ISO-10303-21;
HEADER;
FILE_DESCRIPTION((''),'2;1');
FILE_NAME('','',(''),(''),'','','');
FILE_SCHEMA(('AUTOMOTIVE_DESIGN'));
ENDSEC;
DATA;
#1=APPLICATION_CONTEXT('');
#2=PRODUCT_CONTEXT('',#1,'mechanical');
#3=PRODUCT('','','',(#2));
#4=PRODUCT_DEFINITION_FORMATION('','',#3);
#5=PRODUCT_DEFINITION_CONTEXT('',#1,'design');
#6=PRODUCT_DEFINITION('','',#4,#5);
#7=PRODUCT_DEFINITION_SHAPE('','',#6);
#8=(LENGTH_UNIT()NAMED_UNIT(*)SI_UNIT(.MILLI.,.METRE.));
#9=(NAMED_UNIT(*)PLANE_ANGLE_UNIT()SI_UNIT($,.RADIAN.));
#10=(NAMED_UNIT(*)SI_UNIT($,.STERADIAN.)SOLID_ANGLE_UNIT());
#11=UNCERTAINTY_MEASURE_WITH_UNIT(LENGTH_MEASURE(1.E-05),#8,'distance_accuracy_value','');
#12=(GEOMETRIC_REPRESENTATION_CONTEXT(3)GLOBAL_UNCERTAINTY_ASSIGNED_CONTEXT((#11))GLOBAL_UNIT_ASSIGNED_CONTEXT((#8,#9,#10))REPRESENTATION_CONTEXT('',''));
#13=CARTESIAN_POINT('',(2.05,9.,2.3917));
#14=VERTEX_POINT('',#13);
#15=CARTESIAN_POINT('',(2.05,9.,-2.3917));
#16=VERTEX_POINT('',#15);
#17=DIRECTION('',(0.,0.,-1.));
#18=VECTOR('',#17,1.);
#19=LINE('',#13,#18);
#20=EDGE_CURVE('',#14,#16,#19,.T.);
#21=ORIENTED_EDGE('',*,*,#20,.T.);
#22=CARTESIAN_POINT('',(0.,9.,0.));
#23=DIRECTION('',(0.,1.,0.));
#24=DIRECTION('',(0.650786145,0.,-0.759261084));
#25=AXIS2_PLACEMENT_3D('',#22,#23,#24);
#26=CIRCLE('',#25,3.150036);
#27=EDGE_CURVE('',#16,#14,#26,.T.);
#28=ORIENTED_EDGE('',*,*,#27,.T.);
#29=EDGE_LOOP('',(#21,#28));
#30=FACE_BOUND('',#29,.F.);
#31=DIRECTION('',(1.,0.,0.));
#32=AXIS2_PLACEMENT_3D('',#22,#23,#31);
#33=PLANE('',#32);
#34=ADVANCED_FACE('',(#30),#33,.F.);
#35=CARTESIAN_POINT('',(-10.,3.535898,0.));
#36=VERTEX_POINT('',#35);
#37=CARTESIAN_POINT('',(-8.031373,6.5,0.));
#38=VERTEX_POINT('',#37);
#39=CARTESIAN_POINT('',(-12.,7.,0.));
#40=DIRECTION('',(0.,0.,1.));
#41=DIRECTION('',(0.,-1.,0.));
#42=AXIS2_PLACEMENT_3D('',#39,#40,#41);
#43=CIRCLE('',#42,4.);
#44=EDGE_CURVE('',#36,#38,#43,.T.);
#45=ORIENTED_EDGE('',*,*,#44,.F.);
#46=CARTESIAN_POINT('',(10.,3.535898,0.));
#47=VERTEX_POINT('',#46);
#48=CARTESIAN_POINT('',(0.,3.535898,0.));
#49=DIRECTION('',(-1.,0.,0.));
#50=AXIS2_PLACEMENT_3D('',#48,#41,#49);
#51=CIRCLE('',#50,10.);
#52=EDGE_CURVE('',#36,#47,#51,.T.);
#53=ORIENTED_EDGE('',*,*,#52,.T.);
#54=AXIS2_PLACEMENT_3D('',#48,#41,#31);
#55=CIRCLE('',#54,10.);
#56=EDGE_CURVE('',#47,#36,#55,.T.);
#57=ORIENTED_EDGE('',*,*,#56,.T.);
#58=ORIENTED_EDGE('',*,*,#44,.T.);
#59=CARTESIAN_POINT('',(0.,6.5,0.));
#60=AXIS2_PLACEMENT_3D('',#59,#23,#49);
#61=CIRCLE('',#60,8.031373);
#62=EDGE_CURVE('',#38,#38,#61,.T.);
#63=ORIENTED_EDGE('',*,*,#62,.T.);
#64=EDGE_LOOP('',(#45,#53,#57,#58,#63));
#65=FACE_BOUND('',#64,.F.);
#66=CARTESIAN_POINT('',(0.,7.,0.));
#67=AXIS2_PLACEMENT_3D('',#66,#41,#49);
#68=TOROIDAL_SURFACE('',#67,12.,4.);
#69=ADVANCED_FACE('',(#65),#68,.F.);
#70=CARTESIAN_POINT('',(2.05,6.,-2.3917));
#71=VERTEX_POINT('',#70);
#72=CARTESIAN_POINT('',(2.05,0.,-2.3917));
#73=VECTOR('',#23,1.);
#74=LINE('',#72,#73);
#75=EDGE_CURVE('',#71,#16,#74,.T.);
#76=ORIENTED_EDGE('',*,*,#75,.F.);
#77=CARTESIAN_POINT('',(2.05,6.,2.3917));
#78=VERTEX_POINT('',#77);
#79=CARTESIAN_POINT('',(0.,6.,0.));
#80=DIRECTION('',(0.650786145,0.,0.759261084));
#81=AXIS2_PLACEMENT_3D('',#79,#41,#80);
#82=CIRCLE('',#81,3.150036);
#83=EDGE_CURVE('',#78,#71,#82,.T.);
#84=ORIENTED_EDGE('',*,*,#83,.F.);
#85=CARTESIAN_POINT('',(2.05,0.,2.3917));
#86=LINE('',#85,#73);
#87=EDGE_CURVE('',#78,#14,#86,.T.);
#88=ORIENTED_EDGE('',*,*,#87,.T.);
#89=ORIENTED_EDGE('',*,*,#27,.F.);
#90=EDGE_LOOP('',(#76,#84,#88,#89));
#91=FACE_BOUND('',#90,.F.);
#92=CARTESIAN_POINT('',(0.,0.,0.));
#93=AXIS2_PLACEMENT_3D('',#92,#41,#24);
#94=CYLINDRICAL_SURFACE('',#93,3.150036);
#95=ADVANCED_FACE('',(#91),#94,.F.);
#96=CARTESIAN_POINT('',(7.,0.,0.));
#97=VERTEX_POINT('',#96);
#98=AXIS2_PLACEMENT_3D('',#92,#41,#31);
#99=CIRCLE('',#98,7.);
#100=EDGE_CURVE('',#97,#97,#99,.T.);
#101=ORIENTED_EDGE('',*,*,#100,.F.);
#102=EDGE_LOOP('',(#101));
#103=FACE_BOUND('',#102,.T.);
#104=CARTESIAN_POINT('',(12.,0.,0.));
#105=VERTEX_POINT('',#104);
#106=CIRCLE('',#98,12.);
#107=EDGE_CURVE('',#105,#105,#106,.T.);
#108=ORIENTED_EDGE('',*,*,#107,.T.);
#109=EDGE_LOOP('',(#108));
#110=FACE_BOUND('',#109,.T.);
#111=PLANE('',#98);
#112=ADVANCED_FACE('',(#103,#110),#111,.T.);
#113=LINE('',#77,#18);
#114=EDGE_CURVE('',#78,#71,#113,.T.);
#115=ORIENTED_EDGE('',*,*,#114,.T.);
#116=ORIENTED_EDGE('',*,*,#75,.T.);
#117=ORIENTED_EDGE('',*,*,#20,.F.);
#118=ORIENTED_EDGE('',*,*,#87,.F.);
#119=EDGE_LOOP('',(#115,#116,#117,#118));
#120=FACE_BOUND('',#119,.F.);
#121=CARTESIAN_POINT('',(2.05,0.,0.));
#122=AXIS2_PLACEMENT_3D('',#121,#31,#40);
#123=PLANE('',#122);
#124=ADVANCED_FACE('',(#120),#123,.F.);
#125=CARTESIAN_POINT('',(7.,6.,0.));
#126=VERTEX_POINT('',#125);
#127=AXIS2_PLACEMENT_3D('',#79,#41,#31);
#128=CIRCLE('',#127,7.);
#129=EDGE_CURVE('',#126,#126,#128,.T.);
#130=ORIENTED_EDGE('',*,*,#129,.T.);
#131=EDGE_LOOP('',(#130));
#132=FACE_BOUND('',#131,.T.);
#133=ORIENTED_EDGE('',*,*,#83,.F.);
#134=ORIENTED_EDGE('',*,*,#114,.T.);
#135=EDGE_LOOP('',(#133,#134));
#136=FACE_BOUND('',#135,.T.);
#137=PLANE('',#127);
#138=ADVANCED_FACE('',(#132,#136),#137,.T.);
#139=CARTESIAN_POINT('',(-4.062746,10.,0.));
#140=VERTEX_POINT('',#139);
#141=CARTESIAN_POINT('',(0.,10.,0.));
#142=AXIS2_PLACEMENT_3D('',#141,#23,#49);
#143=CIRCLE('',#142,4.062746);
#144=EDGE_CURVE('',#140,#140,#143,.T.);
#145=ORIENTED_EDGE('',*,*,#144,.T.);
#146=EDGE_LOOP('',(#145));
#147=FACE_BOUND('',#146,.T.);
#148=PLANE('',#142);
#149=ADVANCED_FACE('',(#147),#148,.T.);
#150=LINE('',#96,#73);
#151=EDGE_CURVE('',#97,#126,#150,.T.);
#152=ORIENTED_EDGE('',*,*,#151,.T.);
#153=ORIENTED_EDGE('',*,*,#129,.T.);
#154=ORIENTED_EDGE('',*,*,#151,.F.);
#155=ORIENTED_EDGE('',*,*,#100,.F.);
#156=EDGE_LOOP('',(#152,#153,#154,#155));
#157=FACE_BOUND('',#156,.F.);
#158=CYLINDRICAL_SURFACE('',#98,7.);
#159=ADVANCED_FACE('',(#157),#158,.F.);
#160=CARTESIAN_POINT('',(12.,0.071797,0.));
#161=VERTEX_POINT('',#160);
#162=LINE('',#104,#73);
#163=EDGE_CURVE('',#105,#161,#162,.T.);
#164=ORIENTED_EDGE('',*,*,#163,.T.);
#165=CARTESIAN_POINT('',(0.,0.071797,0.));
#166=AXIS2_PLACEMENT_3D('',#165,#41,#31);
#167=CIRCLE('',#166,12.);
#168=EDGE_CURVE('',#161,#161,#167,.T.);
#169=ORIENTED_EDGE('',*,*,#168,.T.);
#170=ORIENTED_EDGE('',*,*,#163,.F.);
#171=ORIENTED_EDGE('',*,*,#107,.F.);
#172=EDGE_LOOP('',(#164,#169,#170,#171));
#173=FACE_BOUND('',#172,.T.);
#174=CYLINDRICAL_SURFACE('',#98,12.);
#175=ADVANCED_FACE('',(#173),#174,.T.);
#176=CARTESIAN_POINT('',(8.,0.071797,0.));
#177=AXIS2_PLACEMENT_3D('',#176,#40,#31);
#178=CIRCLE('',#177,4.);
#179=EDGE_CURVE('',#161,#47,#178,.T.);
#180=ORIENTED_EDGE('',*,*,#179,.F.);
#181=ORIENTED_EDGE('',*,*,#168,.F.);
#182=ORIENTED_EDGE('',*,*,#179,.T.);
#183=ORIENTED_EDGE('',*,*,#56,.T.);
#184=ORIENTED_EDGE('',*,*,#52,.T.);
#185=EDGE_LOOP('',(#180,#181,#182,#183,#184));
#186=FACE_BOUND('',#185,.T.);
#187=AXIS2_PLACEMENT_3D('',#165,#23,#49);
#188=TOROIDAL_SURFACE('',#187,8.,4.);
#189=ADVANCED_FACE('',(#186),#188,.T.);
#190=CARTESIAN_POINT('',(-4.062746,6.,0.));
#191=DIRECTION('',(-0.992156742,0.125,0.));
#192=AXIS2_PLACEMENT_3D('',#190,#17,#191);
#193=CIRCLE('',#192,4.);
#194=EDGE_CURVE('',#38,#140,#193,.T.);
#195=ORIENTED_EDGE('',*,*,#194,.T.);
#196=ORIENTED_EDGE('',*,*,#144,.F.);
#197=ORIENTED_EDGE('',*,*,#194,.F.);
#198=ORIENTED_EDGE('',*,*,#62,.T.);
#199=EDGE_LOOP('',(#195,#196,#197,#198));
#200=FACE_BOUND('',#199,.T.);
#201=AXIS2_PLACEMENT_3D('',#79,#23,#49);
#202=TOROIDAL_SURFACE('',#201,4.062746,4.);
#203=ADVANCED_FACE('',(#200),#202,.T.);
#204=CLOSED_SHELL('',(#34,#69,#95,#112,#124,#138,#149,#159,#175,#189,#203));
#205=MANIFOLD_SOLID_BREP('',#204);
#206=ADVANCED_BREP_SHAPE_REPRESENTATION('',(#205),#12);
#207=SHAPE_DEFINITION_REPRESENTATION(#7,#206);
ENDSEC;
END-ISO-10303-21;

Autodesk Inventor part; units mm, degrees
ref_plane "YZ Plane" through (0, 0, 0) normal (1, 0, 0) x (0, 1, 0)
ref_plane "XZ Plane" through (0, 0, 0) normal (0, 1, 0) x (-1, 0, 0)
ref_plane "XY Plane" through (0, 0, 0) normal (0, 0, 1) x (1, 0, 0)
sketch "Sketch1" plane through (0, 0, 0) normal (0, 1, 0) x (-1, 0, 0)
  arc A0 (-2.05, -2.3917) -> (-2.05, 2.3917) centre (0, 0) ccw
  line L0 (3.15, 0) -> (-2.05, 0)
  line L1 (-2.05, 0) -> (-2.05, -2.3917)
  line L2 (-2.05, 0) -> (-2.05, 2.3917)
  circle A1 centre (0, 0) radius 8
  dimension "d0" = 6.3
  dimension "d1" = 5.2
  dimension "d2" = 16
extrude "Extrusion1" add sketch "Sketch1" along normal blind 10
sketch "Sketch2" plane through (0, 10, 0) normal (0, 1, 0) x (1, 0, 0)
  arc A0 (2.05, 2.3917) -> (2.05, -2.3917) centre (0, 0) ccw projected
  line L0 (2.05, 2.3917) -> (2.05, -2.3917) projected
extrude "Extrusion2" add sketch "Sketch2" against normal blind 1
sketch "Sketch3" plane through (0, 0, 0) normal (0, -1, 0) x (1, 0, 0)
  arc A0 (2.05, 2.3917) -> (2.05, -2.3917) centre (0, 0) ccw projected
  line L0 (2.05, 2.3917) -> (2.05, -2.3917) projected
  circle A1 centre (0, 0) radius 7
  dimension "d7" = 14
extrude "Extrusion3" cut sketch "Sketch3" against normal blind 6
sketch "Sketch4" plane through (0, 0, 0) normal (0, -1, 0) x (1, 0, 0)
  circle A0 centre (0, 0) radius 8 projected
  circle A1 centre (0, 0) radius 12
  dimension "d10" = 24
extrude "Extrusion4" add sketch "Sketch4" against normal blind 3
fillet "Fillet1" radius 4 3 edges at (8, 3, 0) (-12, 3, 0) (8, 10, 0)
properties part number "galka enkodera"
